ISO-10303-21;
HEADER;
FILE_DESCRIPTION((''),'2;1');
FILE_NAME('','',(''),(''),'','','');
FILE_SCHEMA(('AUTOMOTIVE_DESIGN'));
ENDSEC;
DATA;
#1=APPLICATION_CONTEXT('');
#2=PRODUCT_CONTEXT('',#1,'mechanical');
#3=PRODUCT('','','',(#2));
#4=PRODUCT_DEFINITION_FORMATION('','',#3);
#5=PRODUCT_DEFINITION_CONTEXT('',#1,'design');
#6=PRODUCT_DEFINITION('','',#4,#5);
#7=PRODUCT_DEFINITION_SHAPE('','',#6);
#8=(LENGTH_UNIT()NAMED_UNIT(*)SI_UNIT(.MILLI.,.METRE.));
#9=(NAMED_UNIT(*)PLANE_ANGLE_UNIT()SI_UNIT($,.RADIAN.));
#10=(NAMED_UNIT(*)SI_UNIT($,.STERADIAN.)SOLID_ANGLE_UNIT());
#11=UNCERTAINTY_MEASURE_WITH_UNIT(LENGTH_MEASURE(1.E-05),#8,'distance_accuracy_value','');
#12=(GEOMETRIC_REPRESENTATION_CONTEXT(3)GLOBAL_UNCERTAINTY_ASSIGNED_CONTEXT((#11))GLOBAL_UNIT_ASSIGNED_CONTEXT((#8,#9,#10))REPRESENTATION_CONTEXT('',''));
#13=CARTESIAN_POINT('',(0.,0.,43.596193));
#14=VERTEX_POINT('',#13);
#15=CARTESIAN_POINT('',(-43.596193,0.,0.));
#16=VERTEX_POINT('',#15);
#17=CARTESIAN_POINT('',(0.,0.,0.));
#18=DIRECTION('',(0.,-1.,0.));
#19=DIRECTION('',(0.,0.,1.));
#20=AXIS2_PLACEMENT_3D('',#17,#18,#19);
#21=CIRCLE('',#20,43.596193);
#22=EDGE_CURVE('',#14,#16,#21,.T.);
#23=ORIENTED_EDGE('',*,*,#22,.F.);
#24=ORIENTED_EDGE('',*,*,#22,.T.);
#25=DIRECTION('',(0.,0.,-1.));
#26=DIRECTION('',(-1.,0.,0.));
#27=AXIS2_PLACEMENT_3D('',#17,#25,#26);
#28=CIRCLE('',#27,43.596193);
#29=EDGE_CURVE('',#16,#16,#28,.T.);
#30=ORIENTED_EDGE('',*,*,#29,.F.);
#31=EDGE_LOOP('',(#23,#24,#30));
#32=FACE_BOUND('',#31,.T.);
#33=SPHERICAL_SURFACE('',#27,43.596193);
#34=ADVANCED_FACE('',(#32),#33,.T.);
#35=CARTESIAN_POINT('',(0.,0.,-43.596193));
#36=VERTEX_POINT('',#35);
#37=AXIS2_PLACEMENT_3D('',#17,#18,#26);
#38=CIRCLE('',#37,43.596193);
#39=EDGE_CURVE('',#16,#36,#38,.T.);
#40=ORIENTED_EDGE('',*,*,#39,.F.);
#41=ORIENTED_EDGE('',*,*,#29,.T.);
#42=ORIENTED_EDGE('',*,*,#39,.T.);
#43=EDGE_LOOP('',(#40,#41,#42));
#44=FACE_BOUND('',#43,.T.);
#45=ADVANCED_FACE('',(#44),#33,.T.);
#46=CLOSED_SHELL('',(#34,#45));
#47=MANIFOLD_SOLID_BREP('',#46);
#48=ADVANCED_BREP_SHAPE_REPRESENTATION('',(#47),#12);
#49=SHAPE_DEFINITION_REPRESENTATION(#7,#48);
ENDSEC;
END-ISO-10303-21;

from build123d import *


# Not quite as in the source:
# - the program builds the solid bodies; features that only make, move or delete a surface that nothing else refers to are left out


with BuildPart() as f1:
    # F0 (on Front) → F1 (revolve)
    with BuildSketch(Plane.XZ):
        with BuildLine():
            Line((0, -43.5961931944), (0, 43.5961931944))
            ThreePointArc((0, 43.5961931944), (-30.8271638417, 30.8271638417), (-43.5961931944, 0))
            ThreePointArc((-43.5961931944, 0), (-30.8271638417, -30.8271638417), (0, -43.5961931944))
        make_face()
    revolve(axis=Axis((0, 0, 0), (0, 0, -1)))


solid = f1.part
